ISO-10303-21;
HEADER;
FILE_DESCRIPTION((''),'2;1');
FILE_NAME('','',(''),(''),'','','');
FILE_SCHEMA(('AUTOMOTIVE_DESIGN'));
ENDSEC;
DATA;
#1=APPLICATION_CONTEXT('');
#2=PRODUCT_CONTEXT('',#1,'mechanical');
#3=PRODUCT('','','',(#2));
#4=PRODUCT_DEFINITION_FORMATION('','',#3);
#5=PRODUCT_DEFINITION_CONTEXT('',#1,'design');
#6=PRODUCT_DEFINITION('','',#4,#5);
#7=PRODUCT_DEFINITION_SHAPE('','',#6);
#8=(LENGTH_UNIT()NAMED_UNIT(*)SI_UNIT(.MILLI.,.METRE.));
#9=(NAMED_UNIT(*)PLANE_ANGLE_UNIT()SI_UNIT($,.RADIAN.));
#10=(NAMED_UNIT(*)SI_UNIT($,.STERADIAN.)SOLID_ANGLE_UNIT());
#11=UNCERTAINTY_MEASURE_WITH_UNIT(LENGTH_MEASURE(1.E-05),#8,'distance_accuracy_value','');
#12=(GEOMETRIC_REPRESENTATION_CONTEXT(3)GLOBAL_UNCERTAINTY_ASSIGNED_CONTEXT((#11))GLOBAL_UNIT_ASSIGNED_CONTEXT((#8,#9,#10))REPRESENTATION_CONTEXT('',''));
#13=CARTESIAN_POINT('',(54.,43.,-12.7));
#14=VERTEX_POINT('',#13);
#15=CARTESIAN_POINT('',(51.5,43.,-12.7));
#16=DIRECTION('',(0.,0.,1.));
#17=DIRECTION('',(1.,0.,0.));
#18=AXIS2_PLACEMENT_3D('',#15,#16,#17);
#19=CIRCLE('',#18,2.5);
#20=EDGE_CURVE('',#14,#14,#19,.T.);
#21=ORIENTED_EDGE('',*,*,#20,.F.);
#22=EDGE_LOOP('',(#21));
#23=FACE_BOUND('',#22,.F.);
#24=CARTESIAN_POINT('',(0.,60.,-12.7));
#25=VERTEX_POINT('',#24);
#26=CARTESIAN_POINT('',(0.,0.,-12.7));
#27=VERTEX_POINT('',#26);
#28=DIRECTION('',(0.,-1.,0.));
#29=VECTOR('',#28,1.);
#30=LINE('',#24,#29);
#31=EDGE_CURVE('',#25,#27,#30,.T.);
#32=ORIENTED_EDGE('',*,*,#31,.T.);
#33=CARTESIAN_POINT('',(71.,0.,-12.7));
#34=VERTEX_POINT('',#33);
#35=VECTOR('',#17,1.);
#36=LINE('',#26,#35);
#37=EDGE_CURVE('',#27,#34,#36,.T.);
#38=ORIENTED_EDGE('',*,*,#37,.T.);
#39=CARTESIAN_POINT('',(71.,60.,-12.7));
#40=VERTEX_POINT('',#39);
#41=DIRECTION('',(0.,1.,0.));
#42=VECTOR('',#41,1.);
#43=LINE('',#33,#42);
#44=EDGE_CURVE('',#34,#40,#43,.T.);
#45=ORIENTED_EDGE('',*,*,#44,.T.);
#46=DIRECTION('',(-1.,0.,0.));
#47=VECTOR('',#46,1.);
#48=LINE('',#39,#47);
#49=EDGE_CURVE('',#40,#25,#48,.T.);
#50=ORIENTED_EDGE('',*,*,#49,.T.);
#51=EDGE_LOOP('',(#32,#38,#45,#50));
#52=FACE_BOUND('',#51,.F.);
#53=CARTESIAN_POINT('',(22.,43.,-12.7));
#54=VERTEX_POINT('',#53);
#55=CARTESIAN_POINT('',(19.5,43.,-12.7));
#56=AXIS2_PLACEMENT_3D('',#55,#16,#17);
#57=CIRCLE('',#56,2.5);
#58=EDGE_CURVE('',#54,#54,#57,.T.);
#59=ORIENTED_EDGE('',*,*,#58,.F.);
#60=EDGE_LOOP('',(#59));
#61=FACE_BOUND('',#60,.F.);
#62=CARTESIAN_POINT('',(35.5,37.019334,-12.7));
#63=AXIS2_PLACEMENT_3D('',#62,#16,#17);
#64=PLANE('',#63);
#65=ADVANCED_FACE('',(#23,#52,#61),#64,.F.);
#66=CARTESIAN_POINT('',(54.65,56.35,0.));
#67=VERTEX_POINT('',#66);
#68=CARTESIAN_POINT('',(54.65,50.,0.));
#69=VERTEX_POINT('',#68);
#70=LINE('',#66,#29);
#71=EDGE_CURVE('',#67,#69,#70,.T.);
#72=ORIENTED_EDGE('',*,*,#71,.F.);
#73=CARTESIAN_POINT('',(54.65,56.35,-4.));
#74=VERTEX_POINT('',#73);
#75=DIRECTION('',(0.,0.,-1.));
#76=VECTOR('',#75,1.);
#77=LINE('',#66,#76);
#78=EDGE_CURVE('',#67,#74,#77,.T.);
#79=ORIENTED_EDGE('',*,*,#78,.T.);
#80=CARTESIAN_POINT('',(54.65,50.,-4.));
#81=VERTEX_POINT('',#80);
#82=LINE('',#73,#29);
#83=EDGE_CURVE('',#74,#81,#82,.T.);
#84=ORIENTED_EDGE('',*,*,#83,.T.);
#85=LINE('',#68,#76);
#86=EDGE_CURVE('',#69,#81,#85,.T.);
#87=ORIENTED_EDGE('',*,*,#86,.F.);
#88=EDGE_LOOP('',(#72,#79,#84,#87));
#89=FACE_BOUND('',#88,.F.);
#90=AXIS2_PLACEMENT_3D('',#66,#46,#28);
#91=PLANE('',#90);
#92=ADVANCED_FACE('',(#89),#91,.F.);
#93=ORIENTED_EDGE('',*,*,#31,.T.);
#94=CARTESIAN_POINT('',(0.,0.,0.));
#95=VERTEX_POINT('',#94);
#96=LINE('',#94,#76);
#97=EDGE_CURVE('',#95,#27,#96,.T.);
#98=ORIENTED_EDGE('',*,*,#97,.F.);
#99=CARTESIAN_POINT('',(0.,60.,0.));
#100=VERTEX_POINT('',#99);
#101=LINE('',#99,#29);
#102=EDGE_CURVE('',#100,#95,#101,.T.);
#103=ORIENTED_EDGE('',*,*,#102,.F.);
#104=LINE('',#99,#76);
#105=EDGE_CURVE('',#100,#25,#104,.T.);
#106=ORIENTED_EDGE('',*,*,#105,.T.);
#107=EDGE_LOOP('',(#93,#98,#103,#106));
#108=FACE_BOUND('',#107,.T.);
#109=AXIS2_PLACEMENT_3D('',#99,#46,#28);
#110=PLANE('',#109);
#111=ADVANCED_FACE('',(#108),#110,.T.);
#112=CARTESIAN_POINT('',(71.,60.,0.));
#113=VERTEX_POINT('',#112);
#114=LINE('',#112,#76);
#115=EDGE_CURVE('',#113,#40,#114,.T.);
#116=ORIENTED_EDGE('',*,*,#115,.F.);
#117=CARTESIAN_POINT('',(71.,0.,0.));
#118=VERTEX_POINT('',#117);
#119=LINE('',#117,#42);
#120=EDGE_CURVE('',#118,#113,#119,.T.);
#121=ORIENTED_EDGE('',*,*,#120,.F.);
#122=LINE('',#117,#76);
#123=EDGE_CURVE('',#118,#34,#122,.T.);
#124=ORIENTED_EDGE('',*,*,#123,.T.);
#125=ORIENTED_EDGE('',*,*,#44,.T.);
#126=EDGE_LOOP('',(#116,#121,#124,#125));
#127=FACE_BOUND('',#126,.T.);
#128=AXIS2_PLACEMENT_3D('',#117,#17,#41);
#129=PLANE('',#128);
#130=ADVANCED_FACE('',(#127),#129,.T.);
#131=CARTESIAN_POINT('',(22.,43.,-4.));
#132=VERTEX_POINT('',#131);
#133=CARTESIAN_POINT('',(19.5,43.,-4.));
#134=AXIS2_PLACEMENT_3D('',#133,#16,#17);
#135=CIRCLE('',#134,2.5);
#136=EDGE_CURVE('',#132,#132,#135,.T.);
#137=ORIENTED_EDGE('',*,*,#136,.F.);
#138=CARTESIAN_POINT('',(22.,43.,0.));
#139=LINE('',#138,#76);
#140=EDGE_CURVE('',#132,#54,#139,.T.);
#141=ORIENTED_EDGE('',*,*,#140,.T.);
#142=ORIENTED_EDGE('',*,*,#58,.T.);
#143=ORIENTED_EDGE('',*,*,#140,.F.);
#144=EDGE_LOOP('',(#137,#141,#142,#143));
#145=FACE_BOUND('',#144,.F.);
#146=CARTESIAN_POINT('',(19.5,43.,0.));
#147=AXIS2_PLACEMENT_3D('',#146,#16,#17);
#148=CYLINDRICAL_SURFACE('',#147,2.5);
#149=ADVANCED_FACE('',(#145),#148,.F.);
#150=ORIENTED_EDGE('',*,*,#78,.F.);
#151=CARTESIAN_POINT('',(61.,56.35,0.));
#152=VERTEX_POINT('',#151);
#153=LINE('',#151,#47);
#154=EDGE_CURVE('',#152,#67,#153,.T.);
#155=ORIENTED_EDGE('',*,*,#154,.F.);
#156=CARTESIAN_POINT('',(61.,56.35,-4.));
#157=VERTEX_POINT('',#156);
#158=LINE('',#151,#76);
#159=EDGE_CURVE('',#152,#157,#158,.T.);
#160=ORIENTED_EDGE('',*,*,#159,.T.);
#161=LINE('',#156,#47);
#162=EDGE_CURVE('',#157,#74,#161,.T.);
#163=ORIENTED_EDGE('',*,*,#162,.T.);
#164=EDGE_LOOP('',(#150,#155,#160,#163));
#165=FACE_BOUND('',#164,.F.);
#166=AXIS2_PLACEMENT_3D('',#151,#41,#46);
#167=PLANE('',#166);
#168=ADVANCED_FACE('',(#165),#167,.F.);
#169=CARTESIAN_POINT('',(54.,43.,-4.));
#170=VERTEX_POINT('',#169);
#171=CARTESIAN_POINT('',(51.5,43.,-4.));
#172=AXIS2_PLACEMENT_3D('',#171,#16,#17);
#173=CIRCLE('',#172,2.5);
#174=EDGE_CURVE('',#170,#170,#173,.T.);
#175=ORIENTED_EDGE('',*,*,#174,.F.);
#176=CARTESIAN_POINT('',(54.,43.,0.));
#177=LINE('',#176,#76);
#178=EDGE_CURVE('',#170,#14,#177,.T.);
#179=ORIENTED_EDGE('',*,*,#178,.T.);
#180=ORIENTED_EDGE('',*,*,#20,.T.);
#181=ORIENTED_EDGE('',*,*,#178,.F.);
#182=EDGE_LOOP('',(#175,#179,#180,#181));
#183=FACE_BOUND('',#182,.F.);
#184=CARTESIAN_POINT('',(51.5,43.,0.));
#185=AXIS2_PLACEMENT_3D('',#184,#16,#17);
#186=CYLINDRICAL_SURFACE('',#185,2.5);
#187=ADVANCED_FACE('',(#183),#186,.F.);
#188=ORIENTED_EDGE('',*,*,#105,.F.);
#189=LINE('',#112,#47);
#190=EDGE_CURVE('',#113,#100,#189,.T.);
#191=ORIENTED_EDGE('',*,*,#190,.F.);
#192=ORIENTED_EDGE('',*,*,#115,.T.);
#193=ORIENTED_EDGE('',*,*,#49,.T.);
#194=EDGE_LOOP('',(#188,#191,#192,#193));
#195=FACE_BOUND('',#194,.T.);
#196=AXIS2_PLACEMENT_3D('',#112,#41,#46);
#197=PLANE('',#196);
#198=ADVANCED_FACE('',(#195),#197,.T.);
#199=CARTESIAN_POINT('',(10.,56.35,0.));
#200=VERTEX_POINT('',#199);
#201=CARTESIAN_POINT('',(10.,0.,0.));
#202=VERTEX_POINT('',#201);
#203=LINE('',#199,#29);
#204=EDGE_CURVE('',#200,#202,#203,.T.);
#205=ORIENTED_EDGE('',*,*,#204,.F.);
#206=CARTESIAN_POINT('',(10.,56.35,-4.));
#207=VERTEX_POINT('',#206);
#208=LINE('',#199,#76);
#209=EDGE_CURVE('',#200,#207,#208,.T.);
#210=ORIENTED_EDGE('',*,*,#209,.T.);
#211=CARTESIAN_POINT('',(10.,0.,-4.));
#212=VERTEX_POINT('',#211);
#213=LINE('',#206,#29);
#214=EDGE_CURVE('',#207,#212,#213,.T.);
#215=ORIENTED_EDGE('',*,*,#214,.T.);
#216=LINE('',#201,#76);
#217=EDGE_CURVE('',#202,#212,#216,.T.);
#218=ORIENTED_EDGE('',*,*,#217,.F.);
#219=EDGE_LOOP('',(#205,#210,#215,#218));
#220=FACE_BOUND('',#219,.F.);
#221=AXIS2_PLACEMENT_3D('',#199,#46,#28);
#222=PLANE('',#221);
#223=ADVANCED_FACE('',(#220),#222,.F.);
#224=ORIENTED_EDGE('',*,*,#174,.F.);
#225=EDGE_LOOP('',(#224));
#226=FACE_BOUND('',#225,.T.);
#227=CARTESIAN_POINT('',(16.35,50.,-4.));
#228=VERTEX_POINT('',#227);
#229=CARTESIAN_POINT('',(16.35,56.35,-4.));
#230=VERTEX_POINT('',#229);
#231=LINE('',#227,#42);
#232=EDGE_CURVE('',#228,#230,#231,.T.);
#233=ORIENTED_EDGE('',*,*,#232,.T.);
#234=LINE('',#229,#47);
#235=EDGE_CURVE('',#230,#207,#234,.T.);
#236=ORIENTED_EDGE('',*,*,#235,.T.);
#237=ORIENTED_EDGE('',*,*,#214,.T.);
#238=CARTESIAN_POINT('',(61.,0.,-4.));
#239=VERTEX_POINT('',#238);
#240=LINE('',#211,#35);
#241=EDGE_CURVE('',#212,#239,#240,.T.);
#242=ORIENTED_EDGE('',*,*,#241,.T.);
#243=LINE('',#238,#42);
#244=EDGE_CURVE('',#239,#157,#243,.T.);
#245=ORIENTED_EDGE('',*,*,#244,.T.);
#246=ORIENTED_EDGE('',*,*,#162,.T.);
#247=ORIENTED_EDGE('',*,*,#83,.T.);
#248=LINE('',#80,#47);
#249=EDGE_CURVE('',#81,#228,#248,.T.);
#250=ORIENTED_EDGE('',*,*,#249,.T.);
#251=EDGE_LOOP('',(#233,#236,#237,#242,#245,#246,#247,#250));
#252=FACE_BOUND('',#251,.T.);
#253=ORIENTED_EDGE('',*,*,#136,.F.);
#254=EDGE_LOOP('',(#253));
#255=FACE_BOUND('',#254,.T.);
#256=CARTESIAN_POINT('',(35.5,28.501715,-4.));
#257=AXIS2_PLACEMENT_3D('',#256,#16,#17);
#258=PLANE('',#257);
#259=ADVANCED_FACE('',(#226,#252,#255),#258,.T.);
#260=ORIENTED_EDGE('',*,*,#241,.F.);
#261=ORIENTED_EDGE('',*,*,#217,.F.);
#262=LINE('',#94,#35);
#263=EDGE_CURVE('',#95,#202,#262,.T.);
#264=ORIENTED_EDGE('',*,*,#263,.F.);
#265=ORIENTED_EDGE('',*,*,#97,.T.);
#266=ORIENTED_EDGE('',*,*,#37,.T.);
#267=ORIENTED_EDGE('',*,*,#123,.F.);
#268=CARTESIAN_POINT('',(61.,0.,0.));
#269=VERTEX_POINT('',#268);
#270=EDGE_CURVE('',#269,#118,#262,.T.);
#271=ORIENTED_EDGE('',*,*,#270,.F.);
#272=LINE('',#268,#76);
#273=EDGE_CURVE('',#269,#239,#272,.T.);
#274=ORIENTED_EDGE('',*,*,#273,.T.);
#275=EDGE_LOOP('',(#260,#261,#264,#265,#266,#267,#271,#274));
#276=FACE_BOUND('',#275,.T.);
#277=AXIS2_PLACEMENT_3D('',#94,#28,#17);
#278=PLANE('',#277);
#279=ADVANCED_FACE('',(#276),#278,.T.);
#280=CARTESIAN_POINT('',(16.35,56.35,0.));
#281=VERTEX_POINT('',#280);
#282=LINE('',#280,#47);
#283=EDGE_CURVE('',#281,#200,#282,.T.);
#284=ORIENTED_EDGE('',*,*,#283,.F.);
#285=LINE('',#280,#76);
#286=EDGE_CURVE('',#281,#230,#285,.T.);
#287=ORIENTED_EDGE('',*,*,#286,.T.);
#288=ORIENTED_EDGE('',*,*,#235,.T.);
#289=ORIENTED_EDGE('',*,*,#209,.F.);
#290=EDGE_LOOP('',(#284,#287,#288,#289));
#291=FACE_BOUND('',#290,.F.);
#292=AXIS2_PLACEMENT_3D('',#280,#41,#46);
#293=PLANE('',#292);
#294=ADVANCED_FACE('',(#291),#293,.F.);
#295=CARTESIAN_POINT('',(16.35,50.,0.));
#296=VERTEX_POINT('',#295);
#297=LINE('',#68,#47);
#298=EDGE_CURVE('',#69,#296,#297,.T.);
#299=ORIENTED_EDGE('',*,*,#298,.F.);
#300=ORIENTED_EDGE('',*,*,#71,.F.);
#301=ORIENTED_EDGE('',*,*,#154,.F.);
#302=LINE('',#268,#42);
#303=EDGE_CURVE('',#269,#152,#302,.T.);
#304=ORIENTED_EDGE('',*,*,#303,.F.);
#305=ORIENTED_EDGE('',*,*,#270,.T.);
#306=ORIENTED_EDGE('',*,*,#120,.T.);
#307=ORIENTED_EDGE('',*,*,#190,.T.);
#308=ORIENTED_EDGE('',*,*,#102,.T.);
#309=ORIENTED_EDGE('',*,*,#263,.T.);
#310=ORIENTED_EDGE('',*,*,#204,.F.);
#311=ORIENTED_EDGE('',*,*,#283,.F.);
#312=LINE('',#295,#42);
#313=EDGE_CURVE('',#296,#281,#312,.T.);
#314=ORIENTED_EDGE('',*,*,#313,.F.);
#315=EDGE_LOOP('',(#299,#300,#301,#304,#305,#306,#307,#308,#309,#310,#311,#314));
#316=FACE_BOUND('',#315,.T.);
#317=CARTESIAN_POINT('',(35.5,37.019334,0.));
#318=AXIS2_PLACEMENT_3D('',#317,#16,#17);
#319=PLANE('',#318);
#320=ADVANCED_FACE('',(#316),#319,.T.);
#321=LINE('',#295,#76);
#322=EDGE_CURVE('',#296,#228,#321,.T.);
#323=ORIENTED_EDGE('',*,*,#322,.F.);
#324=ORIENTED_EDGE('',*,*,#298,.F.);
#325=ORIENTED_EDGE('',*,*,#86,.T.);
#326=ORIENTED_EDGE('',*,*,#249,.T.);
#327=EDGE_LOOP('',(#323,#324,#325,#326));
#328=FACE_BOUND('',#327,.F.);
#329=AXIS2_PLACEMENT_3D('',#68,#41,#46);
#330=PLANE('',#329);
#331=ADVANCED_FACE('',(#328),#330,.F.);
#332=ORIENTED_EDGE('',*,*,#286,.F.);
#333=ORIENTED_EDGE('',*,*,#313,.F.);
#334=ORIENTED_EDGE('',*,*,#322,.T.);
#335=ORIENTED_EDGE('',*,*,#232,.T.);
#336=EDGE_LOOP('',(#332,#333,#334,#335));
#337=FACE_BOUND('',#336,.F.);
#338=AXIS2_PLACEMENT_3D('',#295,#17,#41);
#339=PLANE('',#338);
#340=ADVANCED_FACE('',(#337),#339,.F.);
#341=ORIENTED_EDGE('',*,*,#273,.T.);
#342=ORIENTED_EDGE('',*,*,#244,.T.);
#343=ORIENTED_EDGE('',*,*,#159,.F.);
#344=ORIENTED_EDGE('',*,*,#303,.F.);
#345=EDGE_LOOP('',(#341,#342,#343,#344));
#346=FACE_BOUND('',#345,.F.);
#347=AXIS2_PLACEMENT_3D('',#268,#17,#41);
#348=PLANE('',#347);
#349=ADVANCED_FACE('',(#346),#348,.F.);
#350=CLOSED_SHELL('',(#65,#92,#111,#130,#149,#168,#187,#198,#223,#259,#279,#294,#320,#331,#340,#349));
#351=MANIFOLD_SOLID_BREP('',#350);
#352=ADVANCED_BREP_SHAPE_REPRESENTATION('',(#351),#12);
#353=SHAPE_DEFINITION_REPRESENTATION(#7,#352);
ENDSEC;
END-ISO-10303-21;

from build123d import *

# Parameters (mm, degrees)
F0_R     = 2.5
F1_DEPTH = 12.7
F2_DEPTH = 4


# Not quite as in the source:
# - a length typed as a fraction of an inch, garbled in the dataset ("3 / 203.2 mm" for 3/8 in), is restored
# - a feature names something its author has since deleted; it is built from what else it names


with BuildPart() as f1:
    # F0 (on Top) → F1 (new body)
    with BuildSketch(Plane.XY):
        Polygon((0, 60), (0, 0), (10, 0), (10, 50), (10, 56.35), (16.35, 56.35), (16.35, 50), (54.65, 50), (54.65, 56.35), (61, 56.35), (61, 50), (61, 0), (71, 0), (71, 60), align=None)
        Polygon((10, 50), (10, 0), (61, 0), (61, 50), (61, 56.35), (54.65, 56.35), (54.65, 50), (16.35, 50), (16.35, 56.35), (10, 56.35), align=None)
        with Locations((19.5, 43)):
            Circle(F0_R, mode=Mode.SUBTRACT)
        with Locations((51.5, 43)):
            Circle(F0_R, mode=Mode.SUBTRACT)
    extrude(amount=-F1_DEPTH)

    # F0 (on Top) → F2 (cut)
    with BuildSketch(Plane.XY):
        Polygon((10, 50), (10, 0), (61, 0), (61, 50), (61, 56.35), (54.65, 56.35), (54.65, 50), (16.35, 50), (16.35, 56.35), (10, 56.35), align=None)
        with Locations((19.5, 43)):
            Circle(F0_R, mode=Mode.SUBTRACT)
        with Locations((51.5, 43)):
            Circle(F0_R, mode=Mode.SUBTRACT)
    extrude(amount=-F2_DEPTH, mode=Mode.SUBTRACT)


solid = f1.part
